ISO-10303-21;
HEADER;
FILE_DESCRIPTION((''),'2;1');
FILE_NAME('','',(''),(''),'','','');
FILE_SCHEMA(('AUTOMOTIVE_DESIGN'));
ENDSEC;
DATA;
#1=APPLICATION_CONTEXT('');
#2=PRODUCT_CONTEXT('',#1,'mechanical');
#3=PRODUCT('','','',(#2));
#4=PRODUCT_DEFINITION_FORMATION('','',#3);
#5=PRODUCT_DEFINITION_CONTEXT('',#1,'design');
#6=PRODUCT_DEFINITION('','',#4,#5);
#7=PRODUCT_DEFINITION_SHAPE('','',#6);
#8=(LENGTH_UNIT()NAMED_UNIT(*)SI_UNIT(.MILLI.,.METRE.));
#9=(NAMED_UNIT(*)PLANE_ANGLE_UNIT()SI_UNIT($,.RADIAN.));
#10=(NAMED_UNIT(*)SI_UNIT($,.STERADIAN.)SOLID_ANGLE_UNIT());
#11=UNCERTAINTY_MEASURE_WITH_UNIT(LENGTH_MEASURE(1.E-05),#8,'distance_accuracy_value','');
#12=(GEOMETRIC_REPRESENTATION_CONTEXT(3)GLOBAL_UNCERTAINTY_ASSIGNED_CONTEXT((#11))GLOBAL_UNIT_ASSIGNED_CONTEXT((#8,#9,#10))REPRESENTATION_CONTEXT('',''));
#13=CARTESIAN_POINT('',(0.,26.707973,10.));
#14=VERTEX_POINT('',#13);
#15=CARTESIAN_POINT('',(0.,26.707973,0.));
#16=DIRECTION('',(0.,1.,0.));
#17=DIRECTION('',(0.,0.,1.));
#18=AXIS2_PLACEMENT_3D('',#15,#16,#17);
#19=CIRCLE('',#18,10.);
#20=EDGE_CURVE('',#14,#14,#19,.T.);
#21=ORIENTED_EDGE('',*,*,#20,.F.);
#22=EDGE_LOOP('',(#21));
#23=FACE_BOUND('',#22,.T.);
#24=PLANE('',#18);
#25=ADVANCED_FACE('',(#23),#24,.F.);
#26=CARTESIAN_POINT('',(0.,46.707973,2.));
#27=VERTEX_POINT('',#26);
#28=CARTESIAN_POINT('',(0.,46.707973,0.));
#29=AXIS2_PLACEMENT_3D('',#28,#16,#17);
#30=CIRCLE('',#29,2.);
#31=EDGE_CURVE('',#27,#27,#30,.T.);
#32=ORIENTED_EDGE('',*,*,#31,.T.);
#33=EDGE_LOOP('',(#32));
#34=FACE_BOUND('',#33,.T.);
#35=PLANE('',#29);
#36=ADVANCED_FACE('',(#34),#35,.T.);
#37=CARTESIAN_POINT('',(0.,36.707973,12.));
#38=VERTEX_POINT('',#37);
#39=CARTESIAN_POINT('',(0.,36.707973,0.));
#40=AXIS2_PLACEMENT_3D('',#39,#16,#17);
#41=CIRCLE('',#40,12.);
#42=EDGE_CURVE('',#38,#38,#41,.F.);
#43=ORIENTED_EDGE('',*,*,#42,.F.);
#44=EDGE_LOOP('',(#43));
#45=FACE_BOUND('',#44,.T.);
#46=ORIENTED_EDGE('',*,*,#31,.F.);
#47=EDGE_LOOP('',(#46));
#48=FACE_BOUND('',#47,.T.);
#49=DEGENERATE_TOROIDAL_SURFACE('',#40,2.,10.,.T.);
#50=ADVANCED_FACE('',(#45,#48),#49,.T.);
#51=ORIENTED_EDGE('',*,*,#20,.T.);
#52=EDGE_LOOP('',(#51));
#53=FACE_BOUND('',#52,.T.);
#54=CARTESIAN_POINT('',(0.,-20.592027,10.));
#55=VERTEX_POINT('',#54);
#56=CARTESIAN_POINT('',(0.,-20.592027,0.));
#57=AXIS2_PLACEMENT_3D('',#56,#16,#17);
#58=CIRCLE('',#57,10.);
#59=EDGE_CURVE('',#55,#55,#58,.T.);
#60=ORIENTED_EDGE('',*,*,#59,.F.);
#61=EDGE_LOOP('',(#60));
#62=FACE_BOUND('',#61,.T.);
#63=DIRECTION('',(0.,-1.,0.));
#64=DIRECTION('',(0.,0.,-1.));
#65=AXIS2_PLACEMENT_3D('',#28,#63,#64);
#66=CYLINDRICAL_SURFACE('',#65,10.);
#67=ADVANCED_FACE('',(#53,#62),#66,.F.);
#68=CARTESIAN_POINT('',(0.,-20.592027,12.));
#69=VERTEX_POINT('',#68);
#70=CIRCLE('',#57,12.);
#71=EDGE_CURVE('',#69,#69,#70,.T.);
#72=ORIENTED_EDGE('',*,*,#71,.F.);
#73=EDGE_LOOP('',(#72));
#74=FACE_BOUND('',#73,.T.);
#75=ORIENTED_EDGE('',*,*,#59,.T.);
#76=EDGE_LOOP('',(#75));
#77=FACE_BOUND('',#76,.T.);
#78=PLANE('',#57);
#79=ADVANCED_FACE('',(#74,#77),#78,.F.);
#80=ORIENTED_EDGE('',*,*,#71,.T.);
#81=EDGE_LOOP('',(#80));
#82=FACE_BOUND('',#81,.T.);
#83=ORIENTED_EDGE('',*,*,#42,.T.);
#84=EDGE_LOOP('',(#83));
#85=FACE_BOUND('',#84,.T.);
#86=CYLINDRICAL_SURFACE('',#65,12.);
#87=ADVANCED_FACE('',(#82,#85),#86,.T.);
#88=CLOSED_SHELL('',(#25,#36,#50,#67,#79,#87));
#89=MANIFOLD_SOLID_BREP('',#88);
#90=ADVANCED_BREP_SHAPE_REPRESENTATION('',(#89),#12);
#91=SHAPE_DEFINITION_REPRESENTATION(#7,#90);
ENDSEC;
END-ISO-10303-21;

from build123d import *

# Parameters (mm, degrees)
SKETCH1_R           = 6
BOSS_EXTRUDE1_DEPTH = 33.65
FILLET2_R           = 5
SHELL1_OUTLINE_R    = 5
SHELL1_DEPTH        = 23.65
SCALE1_SCALE        = 2


# Read off the part's stored shape, not the designer's step: Shell1
with BuildPart() as part:
    # Sketch1 → Boss-Extrude1 (new body)
    with BuildSketch(Plane(origin=(0, 0, 0), x_dir=(1, 0, 0), z_dir=(0, 1, 0))):
        with Locations(Location((0, 0, 0), (0, 0, 270))):
            Circle(SKETCH1_R)
    extrude(amount=BOSS_EXTRUDE1_DEPTH)

    # Fillet2
    fillet2_edges = [part.edges().sort_by_distance(p)[0] for p in [
        (0, 33.65, -6),
    ]]
    fillet(fillet2_edges, radius=FILLET2_R)

    # Shell1 outline → Shell1 (cut)
    with BuildSketch(Plane(origin=(0, 0, 0), x_dir=(1, 0, 0), z_dir=(0, 1, 0))):
        Circle(SHELL1_OUTLINE_R)
    extrude(amount=SHELL1_DEPTH, mode=Mode.SUBTRACT)


with BuildPart() as part_1:
    # Scale1: scaled about (0, 20.592026778, 0)
    add(part.part.scale(SCALE1_SCALE).moved(Location((0, -20.592026778, 0))))


solid = part_1.part
